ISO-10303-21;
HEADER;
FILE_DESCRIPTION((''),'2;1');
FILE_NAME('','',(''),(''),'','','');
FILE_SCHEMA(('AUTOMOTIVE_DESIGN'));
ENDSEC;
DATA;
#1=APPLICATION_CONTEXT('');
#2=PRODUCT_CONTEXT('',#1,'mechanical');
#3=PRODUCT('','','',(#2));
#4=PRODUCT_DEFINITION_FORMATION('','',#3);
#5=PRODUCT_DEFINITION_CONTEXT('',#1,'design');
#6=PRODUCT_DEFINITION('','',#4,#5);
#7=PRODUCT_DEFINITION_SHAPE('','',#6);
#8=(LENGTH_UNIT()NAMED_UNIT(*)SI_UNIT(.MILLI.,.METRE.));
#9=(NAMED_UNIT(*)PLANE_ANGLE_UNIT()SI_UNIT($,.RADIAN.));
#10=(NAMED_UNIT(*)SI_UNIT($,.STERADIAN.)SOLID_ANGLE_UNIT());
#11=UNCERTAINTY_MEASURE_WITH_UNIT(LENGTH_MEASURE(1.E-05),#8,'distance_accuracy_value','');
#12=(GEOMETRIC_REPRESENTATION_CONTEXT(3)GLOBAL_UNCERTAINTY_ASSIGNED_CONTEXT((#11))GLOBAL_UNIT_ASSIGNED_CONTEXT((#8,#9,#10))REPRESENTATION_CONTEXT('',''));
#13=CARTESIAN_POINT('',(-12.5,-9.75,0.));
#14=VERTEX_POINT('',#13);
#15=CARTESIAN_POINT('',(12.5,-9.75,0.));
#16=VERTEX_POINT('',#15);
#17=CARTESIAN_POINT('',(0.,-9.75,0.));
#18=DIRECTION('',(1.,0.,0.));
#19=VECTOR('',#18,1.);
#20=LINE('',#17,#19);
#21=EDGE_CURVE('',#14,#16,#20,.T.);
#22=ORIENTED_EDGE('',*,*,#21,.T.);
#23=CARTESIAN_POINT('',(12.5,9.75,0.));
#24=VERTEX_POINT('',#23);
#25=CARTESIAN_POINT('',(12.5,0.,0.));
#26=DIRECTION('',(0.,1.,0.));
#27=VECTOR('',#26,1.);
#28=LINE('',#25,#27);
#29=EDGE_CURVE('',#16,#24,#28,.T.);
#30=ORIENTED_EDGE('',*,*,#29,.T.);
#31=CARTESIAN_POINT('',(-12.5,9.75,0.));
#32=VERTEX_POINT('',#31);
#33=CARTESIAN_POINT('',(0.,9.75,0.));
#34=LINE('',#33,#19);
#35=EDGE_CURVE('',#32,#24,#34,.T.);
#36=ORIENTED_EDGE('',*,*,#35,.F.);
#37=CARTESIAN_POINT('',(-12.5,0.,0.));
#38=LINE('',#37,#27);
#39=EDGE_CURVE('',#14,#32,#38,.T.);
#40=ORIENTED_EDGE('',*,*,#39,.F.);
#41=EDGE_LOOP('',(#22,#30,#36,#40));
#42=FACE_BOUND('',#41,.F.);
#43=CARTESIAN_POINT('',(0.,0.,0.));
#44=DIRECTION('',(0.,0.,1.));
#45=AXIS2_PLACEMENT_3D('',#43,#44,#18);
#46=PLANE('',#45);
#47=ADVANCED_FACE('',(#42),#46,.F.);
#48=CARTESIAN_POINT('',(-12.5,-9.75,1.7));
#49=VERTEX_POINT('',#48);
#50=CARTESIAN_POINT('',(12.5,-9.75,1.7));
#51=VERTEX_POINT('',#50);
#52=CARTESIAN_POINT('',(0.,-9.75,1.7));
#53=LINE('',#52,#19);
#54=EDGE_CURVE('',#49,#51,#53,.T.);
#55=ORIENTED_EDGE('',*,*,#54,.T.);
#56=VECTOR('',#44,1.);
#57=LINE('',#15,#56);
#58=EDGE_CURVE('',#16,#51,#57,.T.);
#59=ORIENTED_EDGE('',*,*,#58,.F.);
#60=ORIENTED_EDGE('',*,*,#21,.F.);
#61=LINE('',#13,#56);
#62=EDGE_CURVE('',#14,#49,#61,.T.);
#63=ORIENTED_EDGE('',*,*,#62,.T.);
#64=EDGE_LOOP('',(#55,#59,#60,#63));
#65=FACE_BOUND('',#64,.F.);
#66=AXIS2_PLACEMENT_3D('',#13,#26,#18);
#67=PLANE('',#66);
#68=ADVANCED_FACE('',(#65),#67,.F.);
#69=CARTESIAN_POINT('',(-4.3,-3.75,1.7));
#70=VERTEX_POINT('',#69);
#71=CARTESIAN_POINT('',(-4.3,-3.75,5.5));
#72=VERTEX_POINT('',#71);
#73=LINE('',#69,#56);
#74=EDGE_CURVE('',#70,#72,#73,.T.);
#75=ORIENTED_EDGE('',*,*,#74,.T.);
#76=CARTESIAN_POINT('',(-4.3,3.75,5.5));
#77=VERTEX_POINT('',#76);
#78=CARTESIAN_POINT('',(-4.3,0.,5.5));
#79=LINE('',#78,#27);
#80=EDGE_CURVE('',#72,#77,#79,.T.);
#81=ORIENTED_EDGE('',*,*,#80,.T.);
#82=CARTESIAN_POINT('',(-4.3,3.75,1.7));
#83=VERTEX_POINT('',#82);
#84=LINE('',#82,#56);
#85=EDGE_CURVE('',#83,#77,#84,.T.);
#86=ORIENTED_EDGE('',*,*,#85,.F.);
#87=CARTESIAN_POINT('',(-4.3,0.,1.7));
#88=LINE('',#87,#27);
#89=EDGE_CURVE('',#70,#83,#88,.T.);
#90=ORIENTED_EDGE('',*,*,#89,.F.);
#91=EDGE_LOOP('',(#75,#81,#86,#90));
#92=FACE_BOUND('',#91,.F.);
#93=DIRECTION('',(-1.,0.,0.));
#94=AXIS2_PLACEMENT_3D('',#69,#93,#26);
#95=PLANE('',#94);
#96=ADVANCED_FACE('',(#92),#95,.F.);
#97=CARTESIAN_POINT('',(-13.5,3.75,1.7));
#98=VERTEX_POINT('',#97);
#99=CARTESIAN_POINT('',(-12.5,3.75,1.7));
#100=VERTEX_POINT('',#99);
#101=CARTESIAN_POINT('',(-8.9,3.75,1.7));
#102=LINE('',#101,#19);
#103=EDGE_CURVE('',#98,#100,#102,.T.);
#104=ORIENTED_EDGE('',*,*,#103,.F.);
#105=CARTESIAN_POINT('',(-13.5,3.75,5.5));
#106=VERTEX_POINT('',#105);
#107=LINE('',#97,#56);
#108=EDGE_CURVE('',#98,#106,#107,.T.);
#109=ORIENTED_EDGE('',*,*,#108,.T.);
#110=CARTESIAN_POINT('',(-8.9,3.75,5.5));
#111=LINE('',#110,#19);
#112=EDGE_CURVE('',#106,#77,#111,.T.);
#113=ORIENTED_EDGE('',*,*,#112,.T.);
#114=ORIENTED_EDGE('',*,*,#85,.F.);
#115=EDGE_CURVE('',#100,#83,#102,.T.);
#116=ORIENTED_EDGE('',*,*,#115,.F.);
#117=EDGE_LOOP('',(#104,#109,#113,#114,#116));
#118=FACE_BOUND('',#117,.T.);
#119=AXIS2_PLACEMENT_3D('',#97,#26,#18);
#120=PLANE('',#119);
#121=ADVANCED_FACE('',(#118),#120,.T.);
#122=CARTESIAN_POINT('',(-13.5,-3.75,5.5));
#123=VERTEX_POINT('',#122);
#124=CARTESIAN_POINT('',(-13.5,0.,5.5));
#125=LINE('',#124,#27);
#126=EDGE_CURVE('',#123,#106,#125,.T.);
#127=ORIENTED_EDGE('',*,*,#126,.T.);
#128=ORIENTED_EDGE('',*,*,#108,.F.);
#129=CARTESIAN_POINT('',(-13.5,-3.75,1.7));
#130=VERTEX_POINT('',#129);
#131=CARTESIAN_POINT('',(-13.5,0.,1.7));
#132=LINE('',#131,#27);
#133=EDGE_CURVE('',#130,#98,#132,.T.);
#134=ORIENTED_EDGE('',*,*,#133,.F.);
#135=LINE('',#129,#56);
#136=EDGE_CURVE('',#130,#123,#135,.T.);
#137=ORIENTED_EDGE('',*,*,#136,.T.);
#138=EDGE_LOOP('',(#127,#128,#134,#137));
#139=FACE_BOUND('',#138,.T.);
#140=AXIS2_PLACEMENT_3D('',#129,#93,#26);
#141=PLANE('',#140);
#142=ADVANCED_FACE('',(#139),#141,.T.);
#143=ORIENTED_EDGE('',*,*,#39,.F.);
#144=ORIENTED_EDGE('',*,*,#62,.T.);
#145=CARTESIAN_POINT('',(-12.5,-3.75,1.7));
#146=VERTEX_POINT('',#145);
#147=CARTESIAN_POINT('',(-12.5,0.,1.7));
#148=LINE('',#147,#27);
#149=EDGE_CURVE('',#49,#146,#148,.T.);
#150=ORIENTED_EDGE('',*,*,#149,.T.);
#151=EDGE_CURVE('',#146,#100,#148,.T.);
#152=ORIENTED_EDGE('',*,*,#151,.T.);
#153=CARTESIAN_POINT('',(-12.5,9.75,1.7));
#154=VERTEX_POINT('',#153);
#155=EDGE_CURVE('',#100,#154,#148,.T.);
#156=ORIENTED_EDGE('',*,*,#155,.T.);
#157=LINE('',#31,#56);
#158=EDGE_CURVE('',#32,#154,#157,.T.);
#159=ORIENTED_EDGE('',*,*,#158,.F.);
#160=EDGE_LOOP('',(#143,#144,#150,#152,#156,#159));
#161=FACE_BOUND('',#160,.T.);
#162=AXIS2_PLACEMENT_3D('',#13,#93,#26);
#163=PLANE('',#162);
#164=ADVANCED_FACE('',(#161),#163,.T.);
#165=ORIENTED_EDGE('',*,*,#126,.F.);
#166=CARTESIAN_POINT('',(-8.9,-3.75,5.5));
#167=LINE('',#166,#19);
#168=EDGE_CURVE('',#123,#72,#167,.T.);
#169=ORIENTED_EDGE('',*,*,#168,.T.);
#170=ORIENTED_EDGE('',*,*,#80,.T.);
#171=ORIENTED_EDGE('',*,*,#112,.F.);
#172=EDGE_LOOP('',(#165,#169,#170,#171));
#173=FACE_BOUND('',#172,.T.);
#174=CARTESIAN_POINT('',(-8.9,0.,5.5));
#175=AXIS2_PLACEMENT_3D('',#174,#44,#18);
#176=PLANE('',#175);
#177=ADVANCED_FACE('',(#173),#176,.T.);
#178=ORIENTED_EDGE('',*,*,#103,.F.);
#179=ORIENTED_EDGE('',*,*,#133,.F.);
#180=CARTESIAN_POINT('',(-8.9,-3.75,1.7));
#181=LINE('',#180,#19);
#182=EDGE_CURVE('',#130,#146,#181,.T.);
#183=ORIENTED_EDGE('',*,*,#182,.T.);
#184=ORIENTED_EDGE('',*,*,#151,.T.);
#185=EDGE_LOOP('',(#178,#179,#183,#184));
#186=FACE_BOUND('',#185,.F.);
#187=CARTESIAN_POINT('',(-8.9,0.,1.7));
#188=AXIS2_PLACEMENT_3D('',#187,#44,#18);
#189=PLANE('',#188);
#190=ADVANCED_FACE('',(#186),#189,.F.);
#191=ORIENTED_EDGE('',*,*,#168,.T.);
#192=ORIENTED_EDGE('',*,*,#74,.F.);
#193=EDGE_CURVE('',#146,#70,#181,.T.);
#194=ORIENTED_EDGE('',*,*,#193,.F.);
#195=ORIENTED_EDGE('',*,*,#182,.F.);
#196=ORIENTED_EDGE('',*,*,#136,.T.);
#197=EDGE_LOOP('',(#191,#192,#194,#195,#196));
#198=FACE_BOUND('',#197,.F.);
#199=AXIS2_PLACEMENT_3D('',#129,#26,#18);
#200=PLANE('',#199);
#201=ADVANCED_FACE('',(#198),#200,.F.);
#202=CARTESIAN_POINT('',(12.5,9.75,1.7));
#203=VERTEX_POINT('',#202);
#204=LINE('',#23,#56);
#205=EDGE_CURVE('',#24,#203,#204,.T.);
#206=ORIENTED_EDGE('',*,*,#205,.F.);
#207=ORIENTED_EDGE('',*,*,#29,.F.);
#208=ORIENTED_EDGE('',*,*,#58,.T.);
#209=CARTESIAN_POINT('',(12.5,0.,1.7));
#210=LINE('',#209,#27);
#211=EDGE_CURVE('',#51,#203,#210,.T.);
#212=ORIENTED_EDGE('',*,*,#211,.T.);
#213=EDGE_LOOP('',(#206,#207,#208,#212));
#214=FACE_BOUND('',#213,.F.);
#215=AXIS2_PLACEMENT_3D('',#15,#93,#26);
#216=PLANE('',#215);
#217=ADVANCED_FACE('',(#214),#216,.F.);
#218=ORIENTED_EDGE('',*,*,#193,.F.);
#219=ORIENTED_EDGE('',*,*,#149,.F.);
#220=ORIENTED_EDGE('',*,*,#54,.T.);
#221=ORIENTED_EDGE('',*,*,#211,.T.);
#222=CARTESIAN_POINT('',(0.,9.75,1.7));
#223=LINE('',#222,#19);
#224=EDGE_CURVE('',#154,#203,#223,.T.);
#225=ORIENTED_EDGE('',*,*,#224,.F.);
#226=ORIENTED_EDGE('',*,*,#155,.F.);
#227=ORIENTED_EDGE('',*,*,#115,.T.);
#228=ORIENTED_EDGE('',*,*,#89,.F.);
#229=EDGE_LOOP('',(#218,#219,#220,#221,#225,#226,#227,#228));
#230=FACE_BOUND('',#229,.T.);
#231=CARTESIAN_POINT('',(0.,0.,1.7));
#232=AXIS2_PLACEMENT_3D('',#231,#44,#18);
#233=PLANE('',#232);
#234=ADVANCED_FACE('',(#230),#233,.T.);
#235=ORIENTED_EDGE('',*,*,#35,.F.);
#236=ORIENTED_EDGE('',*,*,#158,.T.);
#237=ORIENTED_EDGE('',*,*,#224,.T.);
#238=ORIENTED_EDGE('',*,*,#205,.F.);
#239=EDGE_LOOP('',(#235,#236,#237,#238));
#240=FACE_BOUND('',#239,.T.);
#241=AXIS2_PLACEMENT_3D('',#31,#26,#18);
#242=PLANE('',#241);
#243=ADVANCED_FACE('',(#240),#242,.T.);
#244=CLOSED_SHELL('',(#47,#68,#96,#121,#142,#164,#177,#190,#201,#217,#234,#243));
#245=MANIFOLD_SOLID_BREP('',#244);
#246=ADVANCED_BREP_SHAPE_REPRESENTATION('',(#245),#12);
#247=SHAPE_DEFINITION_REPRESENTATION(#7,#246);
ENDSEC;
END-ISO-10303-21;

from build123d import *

# Parameters (mm, degrees)
F0_W     = 25
F0_H     = 19.5
F1_DEPTH = 1.7
F2_W     = 9.2
F2_H     = 7.5
F3_DEPTH = 3.8


# Not quite as in the source:
# - a feature names something its author has since deleted; it is built from what else it names


with BuildPart() as f1:
    # F0 (on Top) → F1 (new body)
    with BuildSketch(Plane.XY):
        Rectangle(F0_W, F0_H)
    extrude(amount=F1_DEPTH)

    # F2 (on face) → F3 (join)
    with BuildSketch(Plane.XY.offset(1.7)):
        with Locations((-8.9, 0)):
            Rectangle(F2_W, F2_H)
    extrude(amount=F3_DEPTH)


solid = f1.part
